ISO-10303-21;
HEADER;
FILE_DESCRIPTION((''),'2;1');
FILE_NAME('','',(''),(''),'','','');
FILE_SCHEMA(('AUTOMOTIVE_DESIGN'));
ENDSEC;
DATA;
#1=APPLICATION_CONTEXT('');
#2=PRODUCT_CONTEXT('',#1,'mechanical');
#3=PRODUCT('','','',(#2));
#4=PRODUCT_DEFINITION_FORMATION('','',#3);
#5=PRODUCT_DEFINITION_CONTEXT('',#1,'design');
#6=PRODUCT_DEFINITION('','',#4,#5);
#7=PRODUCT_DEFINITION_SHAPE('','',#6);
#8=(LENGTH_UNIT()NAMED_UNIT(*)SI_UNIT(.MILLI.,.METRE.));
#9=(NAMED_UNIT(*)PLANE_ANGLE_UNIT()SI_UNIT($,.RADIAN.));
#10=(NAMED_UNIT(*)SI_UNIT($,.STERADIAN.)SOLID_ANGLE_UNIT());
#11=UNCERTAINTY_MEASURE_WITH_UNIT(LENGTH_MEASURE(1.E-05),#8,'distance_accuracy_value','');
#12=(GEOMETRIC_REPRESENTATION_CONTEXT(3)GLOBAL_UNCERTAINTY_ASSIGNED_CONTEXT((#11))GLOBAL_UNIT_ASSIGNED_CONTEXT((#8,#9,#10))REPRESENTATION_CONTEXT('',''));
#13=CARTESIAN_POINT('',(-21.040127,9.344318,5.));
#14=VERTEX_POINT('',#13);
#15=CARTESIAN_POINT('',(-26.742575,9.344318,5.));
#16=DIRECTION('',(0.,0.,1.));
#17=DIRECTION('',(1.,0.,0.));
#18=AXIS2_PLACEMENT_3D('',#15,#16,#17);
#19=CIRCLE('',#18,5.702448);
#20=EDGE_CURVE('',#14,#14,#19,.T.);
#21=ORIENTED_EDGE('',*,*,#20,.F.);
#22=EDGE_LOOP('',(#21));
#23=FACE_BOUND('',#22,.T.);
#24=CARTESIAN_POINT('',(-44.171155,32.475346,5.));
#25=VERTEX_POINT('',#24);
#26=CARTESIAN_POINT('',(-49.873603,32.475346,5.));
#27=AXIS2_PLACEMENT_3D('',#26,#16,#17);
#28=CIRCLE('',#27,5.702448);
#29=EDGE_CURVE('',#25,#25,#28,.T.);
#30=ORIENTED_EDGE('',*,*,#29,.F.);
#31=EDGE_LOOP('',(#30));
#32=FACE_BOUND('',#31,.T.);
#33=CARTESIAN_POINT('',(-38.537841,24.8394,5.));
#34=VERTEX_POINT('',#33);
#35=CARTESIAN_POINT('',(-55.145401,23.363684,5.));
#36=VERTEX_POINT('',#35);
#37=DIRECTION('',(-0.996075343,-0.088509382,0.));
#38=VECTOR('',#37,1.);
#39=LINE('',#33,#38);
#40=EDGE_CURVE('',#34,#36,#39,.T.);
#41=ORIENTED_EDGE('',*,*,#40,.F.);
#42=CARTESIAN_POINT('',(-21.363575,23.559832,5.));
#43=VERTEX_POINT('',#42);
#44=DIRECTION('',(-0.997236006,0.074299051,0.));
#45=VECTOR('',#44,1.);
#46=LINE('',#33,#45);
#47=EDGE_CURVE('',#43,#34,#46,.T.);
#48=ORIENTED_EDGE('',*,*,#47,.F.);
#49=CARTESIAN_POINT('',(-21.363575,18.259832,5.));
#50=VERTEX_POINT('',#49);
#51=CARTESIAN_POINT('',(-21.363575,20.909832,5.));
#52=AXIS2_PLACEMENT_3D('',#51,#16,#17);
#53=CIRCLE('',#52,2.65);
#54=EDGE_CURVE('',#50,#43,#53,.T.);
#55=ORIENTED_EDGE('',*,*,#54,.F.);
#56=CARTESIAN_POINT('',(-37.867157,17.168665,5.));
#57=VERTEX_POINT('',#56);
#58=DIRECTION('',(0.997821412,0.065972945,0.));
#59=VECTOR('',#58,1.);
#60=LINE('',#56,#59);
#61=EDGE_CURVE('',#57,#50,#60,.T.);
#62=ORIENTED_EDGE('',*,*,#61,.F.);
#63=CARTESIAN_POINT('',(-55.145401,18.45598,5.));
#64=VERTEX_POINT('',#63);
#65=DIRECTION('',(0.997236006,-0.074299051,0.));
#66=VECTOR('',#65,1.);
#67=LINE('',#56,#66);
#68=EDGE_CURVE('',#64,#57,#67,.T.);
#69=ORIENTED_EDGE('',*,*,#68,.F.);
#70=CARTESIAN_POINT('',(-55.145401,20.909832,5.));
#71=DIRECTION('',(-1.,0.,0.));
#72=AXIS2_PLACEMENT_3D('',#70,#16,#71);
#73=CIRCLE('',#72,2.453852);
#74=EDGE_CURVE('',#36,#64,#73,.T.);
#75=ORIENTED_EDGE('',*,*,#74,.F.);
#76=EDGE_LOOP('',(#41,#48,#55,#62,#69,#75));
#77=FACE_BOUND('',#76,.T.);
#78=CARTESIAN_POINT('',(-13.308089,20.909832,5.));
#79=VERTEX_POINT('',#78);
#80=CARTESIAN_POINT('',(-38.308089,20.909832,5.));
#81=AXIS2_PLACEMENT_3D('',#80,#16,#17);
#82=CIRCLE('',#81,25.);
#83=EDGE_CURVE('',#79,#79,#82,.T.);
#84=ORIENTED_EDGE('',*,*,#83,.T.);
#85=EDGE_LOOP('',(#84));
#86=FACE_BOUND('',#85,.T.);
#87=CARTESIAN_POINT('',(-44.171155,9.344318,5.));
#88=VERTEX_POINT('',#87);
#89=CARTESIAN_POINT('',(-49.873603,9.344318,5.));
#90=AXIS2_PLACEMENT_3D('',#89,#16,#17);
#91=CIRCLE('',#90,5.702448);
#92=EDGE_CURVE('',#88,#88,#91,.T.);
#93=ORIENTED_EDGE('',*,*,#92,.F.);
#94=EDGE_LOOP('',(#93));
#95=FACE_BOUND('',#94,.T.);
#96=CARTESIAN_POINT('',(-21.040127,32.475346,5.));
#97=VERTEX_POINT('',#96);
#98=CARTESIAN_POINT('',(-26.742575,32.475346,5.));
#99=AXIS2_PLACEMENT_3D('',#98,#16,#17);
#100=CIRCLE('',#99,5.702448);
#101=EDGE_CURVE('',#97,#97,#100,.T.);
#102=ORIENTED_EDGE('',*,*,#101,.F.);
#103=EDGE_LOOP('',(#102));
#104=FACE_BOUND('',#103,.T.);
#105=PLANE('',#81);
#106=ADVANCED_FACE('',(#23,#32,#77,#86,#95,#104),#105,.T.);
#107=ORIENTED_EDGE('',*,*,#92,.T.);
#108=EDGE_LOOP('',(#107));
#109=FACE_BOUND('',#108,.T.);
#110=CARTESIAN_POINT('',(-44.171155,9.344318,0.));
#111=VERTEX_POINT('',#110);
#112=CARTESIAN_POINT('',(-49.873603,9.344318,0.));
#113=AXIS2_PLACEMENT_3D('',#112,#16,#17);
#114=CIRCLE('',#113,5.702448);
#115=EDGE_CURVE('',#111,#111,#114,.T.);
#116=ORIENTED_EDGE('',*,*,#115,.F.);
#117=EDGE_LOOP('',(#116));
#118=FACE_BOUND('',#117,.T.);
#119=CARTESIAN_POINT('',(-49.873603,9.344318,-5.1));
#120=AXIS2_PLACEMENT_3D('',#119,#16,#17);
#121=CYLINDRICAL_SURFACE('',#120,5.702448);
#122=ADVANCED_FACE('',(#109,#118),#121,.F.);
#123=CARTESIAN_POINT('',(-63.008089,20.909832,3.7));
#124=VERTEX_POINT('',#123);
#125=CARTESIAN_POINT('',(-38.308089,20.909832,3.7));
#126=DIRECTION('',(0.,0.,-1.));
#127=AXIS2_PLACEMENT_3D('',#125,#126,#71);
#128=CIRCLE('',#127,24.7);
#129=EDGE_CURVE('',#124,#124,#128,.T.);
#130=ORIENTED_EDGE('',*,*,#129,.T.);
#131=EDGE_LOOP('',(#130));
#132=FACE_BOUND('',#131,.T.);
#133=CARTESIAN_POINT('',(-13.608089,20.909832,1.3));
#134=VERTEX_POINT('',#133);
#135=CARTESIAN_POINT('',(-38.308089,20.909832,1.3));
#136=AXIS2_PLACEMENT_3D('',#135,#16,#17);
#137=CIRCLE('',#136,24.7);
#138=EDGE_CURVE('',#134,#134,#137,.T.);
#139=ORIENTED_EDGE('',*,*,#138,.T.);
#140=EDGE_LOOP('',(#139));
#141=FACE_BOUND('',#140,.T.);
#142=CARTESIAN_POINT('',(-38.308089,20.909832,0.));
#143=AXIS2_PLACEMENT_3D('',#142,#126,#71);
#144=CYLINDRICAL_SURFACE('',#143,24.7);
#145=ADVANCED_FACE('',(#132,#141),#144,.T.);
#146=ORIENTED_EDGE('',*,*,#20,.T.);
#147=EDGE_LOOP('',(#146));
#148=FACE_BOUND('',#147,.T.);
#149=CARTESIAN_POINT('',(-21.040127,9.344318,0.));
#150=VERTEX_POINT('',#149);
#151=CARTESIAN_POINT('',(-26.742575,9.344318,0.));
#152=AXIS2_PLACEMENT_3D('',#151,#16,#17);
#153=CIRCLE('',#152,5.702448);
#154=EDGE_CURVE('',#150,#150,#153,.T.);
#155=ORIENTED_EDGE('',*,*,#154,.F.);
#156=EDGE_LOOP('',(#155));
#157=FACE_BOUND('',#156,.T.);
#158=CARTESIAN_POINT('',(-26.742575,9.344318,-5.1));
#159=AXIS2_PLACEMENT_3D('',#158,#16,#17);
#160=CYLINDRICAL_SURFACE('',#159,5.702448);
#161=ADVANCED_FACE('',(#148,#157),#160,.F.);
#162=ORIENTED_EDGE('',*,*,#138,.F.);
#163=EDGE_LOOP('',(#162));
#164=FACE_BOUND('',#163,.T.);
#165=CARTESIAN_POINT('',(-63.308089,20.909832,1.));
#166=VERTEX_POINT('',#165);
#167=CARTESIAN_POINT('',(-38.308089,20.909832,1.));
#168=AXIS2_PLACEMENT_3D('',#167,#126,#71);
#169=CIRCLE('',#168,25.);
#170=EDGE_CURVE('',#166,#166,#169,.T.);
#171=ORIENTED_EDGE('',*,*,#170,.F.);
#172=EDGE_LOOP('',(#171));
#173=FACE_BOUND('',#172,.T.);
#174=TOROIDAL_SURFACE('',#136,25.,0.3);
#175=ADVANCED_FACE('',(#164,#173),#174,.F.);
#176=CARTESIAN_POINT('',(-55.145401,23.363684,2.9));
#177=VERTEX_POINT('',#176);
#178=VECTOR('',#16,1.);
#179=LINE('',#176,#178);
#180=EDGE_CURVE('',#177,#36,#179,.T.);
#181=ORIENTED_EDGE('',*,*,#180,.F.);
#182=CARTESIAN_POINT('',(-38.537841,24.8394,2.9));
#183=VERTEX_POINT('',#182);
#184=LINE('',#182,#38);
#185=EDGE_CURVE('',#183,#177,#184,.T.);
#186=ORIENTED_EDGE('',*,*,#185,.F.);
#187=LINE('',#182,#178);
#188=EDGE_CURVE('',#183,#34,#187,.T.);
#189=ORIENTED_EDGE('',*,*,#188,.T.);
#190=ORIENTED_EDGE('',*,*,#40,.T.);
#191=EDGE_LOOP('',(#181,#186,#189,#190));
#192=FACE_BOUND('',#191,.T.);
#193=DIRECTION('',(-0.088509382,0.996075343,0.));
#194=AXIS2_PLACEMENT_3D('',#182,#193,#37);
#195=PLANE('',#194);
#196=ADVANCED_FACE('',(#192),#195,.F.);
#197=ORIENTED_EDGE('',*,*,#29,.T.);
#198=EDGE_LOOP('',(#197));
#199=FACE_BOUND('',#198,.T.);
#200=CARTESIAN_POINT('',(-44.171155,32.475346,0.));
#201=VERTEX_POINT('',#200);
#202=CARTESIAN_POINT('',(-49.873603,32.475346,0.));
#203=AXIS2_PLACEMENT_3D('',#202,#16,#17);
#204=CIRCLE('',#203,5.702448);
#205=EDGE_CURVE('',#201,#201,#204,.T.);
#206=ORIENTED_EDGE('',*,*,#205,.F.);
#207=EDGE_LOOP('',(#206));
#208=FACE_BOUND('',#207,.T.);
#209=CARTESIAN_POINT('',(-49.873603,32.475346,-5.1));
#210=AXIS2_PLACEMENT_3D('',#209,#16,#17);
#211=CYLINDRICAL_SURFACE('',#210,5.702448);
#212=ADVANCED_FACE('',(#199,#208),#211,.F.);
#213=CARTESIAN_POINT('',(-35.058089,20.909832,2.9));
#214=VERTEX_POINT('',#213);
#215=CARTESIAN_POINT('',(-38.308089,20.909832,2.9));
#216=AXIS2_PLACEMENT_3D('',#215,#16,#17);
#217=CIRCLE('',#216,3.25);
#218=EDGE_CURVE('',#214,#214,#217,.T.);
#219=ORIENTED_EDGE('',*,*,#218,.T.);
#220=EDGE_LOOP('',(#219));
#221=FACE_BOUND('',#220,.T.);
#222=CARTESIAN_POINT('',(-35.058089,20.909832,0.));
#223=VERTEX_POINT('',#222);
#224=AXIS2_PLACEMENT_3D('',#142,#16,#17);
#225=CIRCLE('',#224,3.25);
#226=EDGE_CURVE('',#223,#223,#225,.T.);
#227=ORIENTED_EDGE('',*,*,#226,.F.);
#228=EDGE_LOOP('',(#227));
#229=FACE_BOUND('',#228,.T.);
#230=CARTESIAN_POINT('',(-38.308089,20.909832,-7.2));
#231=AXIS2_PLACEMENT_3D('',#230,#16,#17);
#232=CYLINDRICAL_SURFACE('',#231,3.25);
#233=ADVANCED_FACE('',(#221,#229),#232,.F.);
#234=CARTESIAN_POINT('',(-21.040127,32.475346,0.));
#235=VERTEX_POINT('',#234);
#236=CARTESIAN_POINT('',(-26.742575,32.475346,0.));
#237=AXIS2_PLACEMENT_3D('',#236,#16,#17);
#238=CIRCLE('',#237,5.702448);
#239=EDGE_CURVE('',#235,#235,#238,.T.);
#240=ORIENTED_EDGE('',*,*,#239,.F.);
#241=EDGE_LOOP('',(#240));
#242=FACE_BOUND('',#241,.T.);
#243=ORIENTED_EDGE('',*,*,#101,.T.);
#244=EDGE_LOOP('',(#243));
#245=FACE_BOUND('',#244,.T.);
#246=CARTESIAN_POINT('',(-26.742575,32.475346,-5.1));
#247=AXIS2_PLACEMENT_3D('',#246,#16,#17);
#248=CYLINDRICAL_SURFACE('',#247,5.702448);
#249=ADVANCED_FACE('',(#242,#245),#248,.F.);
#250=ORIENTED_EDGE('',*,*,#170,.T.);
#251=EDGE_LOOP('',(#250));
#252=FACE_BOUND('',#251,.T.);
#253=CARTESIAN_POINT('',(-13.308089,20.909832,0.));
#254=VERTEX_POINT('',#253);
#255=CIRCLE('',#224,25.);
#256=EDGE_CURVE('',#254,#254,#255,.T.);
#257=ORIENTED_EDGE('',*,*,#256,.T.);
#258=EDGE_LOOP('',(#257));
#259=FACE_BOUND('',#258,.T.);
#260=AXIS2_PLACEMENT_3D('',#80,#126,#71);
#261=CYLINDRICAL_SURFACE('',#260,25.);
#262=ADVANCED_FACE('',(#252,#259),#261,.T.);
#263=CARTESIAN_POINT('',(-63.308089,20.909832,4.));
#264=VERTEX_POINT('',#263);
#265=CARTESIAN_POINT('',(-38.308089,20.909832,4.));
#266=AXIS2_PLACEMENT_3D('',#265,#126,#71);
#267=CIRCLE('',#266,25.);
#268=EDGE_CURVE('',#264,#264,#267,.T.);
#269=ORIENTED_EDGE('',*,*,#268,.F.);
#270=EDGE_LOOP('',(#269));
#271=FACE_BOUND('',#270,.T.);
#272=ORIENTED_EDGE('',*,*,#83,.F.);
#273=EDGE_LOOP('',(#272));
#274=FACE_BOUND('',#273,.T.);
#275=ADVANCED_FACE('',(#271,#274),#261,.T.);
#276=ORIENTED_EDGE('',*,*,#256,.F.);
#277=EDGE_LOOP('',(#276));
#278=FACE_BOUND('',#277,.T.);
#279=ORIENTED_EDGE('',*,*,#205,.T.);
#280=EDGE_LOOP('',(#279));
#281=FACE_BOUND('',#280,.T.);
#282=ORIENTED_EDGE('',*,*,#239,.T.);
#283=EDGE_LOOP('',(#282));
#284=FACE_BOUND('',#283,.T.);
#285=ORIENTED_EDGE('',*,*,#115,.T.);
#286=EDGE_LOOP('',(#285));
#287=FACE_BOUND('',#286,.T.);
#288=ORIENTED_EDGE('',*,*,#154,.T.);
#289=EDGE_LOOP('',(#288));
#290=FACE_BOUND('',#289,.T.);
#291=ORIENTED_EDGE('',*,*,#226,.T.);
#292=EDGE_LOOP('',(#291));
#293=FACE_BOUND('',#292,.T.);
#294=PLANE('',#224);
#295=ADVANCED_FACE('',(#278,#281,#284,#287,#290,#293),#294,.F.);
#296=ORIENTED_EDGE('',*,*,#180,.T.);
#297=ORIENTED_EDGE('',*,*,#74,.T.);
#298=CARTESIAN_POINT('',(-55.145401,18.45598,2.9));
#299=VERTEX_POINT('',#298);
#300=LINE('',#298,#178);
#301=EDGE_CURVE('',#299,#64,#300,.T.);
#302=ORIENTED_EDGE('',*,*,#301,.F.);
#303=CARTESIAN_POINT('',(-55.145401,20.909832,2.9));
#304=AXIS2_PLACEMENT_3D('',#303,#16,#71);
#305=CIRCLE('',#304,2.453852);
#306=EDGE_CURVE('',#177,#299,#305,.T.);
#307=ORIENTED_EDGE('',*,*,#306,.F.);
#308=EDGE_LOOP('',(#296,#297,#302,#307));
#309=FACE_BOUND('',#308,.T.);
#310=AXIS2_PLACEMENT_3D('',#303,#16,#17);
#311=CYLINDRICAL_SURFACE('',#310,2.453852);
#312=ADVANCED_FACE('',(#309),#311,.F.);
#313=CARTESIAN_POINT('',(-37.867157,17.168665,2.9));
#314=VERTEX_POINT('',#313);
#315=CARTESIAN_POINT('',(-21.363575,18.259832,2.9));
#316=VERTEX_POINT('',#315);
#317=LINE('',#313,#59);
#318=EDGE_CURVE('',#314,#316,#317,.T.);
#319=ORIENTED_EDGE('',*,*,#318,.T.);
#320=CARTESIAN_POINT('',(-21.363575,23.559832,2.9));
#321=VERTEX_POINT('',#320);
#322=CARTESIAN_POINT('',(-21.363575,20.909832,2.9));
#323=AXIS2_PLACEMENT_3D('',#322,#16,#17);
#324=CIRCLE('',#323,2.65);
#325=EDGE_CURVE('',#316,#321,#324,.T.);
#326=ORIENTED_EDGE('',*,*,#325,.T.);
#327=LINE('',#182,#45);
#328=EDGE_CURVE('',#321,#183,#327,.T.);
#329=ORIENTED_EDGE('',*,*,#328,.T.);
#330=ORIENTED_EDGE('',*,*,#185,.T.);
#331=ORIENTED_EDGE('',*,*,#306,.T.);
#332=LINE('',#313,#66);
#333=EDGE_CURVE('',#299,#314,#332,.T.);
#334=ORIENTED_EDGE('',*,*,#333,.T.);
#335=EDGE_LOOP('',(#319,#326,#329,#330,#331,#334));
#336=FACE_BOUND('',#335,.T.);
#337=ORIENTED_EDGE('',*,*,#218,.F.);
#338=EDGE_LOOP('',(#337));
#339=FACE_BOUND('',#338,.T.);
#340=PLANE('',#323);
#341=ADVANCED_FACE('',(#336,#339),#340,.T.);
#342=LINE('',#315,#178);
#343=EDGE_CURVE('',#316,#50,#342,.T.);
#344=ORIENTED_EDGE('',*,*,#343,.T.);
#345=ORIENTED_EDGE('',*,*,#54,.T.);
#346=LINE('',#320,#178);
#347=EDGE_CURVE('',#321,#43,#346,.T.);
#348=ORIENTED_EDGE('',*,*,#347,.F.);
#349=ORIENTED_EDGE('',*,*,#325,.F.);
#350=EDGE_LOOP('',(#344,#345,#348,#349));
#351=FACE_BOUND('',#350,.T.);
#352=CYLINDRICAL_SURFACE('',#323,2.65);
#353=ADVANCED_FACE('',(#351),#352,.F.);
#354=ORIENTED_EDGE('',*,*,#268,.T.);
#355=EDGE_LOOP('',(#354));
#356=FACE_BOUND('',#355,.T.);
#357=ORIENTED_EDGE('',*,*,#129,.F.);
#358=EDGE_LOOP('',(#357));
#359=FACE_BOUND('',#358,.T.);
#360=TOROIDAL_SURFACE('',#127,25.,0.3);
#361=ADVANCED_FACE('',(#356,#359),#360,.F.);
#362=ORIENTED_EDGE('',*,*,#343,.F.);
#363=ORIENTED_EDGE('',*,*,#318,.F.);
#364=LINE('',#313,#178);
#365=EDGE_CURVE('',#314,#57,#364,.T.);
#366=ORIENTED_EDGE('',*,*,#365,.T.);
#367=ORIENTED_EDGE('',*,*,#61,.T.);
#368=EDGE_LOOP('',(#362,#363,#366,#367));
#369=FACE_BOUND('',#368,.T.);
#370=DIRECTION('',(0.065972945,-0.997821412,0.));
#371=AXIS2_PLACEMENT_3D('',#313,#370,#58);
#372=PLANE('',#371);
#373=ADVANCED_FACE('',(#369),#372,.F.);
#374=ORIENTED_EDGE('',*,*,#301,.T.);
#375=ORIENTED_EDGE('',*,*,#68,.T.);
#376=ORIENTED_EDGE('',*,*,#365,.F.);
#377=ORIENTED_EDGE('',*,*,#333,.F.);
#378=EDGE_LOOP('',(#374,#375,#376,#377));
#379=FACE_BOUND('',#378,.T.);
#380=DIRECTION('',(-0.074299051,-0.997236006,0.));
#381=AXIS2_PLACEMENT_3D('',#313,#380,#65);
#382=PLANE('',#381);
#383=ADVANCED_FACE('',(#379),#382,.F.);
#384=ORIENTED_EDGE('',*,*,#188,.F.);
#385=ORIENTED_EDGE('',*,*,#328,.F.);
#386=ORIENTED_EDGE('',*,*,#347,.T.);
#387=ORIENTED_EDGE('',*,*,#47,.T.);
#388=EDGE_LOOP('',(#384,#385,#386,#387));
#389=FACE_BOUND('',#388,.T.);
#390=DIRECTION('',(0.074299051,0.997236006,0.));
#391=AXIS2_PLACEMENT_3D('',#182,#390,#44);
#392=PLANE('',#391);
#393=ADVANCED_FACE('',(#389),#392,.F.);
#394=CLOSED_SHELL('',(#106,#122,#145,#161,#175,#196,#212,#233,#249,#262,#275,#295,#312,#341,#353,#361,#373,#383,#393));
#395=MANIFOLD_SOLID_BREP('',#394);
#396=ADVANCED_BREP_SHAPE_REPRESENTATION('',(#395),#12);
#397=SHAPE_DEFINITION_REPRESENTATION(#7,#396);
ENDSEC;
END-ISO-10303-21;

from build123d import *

# Parameters (mm, degrees)
SKETCH1_R           = 25
BOSS_EXTRUDE1_DEPTH = 5
FILLET1_R           = 0.3
CUT_EXTRUDE1_DEPTH  = 2.1
SKETCH15_R          = 3.25
CUT_EXTRUDE2_DEPTH  = 10.1
SKETCH18_R          = 5.702447769
CUT_EXTRUDE4_DEPTH  = 10.1


with BuildPart() as part:
    # Sketch1 → Boss-Extrude1 (new body)
    with BuildSketch(Plane.XY):
        with Locations((-38.308088976, 20.909831899)):
            Circle(SKETCH1_R)
    extrude(amount=BOSS_EXTRUDE1_DEPTH)

    # Sketch12 → Cut-Revolve1 (revolve, cut)
    with BuildSketch(Plane.ZY.offset(38.308088976), mode=Mode.PRIVATE) as cut_revolve1_sk:
        Polygon((2.5, 45.909831899), (4, 45.909831899), (4, 45.609831899), (2.5, 45.609831899), (1, 45.609831899), (1, 45.909831899), align=None)
    revolve(cut_revolve1_sk.sketch.rotate(Axis((-38.308088976, 20.909831899, 0), (0, 0, 1)), 90), axis=Axis((-38.308088976, 20.909831899, 0), (0, 0, 1)), mode=Mode.SUBTRACT)

    # Fillet1
    fillet1_edges = [part.edges().sort_by_distance(p)[0] for p in [
        (-13.608088976, 20.909831899, 1),
        (-13.608088976, 20.909831899, 4),
    ]]
    fillet(fillet1_edges, radius=FILLET1_R - 0.0001)  # a hair under: the kernel refuses the full size

    # Sketch13 → Cut-Extrude1 (cut)
    with BuildSketch(Plane.XY.offset(5)):
        with BuildLine():
            Line((-38.537840804, 24.839400282), (-55.145400599, 23.363683745))
            ThreePointArc((-55.145400599, 23.363683745), (-57.599252444, 20.909831899), (-55.145400599, 18.455980054))
            Line((-55.145400599, 18.455980054), (-37.86715674, 17.168664797))
            Line((-37.86715674, 17.168664797), (-21.363574888, 18.259831899))
            ThreePointArc((-21.363574888, 18.259831899), (-18.713574888, 20.909831899), (-21.363574888, 23.559831899))
            Line((-21.363574888, 23.559831899), (-38.537840804, 24.839400282))
        make_face()
    extrude(amount=-CUT_EXTRUDE1_DEPTH, mode=Mode.SUBTRACT)

    # Sketch15 → Cut-Extrude2 (cut)
    with BuildSketch(Plane.XY.offset(2.9)):
        with Locations((-38.308088976, 20.909831899)):
            Circle(SKETCH15_R)
    extrude(amount=-CUT_EXTRUDE2_DEPTH, mode=Mode.SUBTRACT)

    # Sketch18 → Cut-Extrude4 (cut)
    with BuildSketch(Plane.XY.offset(5)):
        with Locations((-26.7425748, 32.475346075)):
            Circle(SKETCH18_R)
        with Locations((-26.7425748, 9.344317724)):
            Circle(SKETCH18_R)
        with Locations((-49.873603152, 9.344317724)):
            Circle(SKETCH18_R)
        with Locations((-49.873603152, 32.475346075)):
            Circle(SKETCH18_R)
    extrude(amount=-CUT_EXTRUDE4_DEPTH, mode=Mode.SUBTRACT)


solid = part.part
